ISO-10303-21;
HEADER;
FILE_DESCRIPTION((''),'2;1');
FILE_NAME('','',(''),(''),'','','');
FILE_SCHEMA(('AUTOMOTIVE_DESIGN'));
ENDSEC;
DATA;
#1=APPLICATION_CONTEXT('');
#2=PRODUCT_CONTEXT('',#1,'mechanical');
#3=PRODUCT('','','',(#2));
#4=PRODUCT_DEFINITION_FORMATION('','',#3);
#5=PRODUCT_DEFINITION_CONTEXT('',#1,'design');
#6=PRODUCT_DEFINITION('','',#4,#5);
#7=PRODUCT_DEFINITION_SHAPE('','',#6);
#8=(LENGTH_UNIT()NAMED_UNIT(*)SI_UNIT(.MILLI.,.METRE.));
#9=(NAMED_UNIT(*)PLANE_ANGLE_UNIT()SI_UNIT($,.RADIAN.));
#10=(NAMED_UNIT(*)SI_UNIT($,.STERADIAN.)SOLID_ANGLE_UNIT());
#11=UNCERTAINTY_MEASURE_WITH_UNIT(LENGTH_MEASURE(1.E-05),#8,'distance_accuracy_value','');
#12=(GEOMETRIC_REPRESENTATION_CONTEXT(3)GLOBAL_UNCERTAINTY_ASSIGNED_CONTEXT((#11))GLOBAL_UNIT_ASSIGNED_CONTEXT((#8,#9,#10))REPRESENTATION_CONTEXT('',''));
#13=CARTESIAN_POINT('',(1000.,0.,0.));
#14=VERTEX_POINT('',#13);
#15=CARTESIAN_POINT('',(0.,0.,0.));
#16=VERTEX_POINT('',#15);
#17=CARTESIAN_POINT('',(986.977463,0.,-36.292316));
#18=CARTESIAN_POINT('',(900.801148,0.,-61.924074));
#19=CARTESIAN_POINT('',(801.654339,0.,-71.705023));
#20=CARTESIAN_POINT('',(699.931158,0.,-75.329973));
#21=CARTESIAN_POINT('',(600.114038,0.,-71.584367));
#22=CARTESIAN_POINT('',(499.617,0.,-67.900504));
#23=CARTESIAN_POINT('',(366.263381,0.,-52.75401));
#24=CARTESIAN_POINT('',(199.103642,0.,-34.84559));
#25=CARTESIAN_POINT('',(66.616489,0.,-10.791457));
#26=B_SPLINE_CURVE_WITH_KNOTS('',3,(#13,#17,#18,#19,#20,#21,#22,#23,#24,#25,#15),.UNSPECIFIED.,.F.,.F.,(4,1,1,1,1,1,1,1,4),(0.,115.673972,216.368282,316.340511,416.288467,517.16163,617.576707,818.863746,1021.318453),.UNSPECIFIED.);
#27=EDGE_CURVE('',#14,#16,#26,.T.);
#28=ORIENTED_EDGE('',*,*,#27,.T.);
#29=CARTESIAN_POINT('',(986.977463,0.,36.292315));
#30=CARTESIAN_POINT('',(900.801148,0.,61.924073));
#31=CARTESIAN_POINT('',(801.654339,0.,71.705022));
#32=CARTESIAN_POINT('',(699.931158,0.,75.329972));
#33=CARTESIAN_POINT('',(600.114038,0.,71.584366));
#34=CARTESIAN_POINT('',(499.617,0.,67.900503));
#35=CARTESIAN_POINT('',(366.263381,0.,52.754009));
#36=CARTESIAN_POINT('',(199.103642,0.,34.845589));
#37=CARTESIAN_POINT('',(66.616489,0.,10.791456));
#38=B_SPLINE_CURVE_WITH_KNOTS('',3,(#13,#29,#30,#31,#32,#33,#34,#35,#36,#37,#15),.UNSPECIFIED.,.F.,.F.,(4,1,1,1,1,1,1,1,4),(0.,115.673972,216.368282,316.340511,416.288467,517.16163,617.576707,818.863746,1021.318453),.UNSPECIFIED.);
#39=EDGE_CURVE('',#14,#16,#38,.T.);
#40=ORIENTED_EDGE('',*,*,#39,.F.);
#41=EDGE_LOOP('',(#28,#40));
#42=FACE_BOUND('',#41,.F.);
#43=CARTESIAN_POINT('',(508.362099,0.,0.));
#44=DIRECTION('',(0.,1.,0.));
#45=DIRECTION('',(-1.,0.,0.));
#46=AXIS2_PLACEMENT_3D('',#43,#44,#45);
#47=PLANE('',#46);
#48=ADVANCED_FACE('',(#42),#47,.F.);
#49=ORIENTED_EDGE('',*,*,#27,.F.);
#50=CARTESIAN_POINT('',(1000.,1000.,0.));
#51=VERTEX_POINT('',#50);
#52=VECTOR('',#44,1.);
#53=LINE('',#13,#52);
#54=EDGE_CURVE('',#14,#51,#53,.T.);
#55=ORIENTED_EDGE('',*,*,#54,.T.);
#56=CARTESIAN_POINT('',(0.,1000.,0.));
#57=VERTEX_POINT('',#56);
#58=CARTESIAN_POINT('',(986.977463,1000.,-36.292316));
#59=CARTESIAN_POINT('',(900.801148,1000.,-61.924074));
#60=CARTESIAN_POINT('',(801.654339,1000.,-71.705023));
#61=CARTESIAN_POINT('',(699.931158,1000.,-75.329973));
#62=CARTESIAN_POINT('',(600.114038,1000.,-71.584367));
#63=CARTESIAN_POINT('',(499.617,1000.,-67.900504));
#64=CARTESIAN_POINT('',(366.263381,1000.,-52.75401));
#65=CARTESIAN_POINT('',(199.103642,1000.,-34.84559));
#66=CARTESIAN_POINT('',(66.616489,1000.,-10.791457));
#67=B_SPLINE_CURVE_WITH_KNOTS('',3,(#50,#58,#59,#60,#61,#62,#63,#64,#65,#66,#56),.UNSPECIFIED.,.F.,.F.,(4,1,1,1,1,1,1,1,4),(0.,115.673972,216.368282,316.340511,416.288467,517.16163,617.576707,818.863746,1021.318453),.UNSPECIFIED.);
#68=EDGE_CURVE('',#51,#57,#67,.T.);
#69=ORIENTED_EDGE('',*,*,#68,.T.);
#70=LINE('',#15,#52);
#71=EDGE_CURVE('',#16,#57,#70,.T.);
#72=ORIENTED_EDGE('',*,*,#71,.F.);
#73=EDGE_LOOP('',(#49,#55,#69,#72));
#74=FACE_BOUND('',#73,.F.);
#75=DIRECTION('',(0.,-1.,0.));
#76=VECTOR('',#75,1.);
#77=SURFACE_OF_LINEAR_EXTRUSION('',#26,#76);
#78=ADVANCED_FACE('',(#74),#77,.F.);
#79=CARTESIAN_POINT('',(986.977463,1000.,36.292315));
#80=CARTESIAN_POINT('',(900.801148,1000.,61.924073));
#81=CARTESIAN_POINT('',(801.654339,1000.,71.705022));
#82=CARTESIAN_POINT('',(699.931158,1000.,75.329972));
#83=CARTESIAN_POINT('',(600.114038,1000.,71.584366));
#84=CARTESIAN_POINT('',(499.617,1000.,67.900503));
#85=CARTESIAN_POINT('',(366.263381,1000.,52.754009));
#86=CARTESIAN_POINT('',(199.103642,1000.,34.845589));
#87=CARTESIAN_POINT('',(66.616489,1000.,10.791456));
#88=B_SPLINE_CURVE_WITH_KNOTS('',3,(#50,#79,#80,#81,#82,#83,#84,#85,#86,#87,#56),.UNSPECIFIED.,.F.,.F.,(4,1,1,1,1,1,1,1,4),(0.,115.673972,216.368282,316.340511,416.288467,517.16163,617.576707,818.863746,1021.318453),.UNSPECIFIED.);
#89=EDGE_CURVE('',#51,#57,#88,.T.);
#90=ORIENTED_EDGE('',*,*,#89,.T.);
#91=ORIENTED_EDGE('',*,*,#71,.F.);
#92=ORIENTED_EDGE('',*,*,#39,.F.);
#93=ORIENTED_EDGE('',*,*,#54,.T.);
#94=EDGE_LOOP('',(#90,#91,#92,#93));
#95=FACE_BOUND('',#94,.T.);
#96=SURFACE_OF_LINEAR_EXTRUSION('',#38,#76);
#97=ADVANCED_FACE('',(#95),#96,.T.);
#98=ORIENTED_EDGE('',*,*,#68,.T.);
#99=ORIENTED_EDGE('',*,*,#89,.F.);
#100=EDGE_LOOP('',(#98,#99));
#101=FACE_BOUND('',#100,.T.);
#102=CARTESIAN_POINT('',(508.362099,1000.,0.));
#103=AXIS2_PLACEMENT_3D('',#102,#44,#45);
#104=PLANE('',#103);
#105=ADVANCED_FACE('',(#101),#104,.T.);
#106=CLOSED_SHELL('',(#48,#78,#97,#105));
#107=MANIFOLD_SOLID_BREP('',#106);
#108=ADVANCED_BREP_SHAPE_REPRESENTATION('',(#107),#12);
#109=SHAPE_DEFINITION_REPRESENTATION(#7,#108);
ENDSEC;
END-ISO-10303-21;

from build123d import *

# Parameters (mm, degrees)
F1_DEPTH = 1000


# Not quite as in the source:
# - the dataset's text gives a spline's control points without its knots; the knots are read off the source's solid


with BuildPart() as f1:
    # F0 (on Front) → F1 (new body)
    with BuildSketch(Plane.XZ):
        with BuildLine():
            add(Edge.make_bspline(
                [(500, -115.648996), (486.977463, -151.941312), (400.801148, -177.57307), (301.654339, -187.354019), (199.931158, -190.978969), (100.114038, -187.233363), (-0.383, -183.5495), (-133.736619, -168.403006), (-300.896358, -150.494586), (-433.383511, -126.440453), (-500, -115.648996)],
                knots=[0, 0, 0, 0, 115.673972, 216.368282, 316.340511, 416.288467, 517.16163, 617.576707, 818.863746, 1021.318453, 1021.318453, 1021.318453, 1021.318453], degree=3))
            add(Edge.make_bspline(
                [(500, -115.648996), (486.977463, -79.356681), (400.801148, -53.724923), (301.654339, -43.943974), (199.931158, -40.319024), (100.114038, -44.06463), (-0.383, -47.748493), (-133.736619, -62.894987), (-300.896358, -80.803407), (-433.383511, -104.85754), (-500, -115.648996)],
                knots=[0, 0, 0, 0, 115.673972, 216.368282, 316.340511, 416.288467, 517.16163, 617.576707, 818.863746, 1021.318453, 1021.318453, 1021.318453, 1021.318453], degree=3))
        make_face()
    extrude(amount=-F1_DEPTH)


with BuildPart() as f1_1:
    # F2: moved
    add(f1.part.moved(Location((500, 0, 115.648996))))


solid = f1_1.part
